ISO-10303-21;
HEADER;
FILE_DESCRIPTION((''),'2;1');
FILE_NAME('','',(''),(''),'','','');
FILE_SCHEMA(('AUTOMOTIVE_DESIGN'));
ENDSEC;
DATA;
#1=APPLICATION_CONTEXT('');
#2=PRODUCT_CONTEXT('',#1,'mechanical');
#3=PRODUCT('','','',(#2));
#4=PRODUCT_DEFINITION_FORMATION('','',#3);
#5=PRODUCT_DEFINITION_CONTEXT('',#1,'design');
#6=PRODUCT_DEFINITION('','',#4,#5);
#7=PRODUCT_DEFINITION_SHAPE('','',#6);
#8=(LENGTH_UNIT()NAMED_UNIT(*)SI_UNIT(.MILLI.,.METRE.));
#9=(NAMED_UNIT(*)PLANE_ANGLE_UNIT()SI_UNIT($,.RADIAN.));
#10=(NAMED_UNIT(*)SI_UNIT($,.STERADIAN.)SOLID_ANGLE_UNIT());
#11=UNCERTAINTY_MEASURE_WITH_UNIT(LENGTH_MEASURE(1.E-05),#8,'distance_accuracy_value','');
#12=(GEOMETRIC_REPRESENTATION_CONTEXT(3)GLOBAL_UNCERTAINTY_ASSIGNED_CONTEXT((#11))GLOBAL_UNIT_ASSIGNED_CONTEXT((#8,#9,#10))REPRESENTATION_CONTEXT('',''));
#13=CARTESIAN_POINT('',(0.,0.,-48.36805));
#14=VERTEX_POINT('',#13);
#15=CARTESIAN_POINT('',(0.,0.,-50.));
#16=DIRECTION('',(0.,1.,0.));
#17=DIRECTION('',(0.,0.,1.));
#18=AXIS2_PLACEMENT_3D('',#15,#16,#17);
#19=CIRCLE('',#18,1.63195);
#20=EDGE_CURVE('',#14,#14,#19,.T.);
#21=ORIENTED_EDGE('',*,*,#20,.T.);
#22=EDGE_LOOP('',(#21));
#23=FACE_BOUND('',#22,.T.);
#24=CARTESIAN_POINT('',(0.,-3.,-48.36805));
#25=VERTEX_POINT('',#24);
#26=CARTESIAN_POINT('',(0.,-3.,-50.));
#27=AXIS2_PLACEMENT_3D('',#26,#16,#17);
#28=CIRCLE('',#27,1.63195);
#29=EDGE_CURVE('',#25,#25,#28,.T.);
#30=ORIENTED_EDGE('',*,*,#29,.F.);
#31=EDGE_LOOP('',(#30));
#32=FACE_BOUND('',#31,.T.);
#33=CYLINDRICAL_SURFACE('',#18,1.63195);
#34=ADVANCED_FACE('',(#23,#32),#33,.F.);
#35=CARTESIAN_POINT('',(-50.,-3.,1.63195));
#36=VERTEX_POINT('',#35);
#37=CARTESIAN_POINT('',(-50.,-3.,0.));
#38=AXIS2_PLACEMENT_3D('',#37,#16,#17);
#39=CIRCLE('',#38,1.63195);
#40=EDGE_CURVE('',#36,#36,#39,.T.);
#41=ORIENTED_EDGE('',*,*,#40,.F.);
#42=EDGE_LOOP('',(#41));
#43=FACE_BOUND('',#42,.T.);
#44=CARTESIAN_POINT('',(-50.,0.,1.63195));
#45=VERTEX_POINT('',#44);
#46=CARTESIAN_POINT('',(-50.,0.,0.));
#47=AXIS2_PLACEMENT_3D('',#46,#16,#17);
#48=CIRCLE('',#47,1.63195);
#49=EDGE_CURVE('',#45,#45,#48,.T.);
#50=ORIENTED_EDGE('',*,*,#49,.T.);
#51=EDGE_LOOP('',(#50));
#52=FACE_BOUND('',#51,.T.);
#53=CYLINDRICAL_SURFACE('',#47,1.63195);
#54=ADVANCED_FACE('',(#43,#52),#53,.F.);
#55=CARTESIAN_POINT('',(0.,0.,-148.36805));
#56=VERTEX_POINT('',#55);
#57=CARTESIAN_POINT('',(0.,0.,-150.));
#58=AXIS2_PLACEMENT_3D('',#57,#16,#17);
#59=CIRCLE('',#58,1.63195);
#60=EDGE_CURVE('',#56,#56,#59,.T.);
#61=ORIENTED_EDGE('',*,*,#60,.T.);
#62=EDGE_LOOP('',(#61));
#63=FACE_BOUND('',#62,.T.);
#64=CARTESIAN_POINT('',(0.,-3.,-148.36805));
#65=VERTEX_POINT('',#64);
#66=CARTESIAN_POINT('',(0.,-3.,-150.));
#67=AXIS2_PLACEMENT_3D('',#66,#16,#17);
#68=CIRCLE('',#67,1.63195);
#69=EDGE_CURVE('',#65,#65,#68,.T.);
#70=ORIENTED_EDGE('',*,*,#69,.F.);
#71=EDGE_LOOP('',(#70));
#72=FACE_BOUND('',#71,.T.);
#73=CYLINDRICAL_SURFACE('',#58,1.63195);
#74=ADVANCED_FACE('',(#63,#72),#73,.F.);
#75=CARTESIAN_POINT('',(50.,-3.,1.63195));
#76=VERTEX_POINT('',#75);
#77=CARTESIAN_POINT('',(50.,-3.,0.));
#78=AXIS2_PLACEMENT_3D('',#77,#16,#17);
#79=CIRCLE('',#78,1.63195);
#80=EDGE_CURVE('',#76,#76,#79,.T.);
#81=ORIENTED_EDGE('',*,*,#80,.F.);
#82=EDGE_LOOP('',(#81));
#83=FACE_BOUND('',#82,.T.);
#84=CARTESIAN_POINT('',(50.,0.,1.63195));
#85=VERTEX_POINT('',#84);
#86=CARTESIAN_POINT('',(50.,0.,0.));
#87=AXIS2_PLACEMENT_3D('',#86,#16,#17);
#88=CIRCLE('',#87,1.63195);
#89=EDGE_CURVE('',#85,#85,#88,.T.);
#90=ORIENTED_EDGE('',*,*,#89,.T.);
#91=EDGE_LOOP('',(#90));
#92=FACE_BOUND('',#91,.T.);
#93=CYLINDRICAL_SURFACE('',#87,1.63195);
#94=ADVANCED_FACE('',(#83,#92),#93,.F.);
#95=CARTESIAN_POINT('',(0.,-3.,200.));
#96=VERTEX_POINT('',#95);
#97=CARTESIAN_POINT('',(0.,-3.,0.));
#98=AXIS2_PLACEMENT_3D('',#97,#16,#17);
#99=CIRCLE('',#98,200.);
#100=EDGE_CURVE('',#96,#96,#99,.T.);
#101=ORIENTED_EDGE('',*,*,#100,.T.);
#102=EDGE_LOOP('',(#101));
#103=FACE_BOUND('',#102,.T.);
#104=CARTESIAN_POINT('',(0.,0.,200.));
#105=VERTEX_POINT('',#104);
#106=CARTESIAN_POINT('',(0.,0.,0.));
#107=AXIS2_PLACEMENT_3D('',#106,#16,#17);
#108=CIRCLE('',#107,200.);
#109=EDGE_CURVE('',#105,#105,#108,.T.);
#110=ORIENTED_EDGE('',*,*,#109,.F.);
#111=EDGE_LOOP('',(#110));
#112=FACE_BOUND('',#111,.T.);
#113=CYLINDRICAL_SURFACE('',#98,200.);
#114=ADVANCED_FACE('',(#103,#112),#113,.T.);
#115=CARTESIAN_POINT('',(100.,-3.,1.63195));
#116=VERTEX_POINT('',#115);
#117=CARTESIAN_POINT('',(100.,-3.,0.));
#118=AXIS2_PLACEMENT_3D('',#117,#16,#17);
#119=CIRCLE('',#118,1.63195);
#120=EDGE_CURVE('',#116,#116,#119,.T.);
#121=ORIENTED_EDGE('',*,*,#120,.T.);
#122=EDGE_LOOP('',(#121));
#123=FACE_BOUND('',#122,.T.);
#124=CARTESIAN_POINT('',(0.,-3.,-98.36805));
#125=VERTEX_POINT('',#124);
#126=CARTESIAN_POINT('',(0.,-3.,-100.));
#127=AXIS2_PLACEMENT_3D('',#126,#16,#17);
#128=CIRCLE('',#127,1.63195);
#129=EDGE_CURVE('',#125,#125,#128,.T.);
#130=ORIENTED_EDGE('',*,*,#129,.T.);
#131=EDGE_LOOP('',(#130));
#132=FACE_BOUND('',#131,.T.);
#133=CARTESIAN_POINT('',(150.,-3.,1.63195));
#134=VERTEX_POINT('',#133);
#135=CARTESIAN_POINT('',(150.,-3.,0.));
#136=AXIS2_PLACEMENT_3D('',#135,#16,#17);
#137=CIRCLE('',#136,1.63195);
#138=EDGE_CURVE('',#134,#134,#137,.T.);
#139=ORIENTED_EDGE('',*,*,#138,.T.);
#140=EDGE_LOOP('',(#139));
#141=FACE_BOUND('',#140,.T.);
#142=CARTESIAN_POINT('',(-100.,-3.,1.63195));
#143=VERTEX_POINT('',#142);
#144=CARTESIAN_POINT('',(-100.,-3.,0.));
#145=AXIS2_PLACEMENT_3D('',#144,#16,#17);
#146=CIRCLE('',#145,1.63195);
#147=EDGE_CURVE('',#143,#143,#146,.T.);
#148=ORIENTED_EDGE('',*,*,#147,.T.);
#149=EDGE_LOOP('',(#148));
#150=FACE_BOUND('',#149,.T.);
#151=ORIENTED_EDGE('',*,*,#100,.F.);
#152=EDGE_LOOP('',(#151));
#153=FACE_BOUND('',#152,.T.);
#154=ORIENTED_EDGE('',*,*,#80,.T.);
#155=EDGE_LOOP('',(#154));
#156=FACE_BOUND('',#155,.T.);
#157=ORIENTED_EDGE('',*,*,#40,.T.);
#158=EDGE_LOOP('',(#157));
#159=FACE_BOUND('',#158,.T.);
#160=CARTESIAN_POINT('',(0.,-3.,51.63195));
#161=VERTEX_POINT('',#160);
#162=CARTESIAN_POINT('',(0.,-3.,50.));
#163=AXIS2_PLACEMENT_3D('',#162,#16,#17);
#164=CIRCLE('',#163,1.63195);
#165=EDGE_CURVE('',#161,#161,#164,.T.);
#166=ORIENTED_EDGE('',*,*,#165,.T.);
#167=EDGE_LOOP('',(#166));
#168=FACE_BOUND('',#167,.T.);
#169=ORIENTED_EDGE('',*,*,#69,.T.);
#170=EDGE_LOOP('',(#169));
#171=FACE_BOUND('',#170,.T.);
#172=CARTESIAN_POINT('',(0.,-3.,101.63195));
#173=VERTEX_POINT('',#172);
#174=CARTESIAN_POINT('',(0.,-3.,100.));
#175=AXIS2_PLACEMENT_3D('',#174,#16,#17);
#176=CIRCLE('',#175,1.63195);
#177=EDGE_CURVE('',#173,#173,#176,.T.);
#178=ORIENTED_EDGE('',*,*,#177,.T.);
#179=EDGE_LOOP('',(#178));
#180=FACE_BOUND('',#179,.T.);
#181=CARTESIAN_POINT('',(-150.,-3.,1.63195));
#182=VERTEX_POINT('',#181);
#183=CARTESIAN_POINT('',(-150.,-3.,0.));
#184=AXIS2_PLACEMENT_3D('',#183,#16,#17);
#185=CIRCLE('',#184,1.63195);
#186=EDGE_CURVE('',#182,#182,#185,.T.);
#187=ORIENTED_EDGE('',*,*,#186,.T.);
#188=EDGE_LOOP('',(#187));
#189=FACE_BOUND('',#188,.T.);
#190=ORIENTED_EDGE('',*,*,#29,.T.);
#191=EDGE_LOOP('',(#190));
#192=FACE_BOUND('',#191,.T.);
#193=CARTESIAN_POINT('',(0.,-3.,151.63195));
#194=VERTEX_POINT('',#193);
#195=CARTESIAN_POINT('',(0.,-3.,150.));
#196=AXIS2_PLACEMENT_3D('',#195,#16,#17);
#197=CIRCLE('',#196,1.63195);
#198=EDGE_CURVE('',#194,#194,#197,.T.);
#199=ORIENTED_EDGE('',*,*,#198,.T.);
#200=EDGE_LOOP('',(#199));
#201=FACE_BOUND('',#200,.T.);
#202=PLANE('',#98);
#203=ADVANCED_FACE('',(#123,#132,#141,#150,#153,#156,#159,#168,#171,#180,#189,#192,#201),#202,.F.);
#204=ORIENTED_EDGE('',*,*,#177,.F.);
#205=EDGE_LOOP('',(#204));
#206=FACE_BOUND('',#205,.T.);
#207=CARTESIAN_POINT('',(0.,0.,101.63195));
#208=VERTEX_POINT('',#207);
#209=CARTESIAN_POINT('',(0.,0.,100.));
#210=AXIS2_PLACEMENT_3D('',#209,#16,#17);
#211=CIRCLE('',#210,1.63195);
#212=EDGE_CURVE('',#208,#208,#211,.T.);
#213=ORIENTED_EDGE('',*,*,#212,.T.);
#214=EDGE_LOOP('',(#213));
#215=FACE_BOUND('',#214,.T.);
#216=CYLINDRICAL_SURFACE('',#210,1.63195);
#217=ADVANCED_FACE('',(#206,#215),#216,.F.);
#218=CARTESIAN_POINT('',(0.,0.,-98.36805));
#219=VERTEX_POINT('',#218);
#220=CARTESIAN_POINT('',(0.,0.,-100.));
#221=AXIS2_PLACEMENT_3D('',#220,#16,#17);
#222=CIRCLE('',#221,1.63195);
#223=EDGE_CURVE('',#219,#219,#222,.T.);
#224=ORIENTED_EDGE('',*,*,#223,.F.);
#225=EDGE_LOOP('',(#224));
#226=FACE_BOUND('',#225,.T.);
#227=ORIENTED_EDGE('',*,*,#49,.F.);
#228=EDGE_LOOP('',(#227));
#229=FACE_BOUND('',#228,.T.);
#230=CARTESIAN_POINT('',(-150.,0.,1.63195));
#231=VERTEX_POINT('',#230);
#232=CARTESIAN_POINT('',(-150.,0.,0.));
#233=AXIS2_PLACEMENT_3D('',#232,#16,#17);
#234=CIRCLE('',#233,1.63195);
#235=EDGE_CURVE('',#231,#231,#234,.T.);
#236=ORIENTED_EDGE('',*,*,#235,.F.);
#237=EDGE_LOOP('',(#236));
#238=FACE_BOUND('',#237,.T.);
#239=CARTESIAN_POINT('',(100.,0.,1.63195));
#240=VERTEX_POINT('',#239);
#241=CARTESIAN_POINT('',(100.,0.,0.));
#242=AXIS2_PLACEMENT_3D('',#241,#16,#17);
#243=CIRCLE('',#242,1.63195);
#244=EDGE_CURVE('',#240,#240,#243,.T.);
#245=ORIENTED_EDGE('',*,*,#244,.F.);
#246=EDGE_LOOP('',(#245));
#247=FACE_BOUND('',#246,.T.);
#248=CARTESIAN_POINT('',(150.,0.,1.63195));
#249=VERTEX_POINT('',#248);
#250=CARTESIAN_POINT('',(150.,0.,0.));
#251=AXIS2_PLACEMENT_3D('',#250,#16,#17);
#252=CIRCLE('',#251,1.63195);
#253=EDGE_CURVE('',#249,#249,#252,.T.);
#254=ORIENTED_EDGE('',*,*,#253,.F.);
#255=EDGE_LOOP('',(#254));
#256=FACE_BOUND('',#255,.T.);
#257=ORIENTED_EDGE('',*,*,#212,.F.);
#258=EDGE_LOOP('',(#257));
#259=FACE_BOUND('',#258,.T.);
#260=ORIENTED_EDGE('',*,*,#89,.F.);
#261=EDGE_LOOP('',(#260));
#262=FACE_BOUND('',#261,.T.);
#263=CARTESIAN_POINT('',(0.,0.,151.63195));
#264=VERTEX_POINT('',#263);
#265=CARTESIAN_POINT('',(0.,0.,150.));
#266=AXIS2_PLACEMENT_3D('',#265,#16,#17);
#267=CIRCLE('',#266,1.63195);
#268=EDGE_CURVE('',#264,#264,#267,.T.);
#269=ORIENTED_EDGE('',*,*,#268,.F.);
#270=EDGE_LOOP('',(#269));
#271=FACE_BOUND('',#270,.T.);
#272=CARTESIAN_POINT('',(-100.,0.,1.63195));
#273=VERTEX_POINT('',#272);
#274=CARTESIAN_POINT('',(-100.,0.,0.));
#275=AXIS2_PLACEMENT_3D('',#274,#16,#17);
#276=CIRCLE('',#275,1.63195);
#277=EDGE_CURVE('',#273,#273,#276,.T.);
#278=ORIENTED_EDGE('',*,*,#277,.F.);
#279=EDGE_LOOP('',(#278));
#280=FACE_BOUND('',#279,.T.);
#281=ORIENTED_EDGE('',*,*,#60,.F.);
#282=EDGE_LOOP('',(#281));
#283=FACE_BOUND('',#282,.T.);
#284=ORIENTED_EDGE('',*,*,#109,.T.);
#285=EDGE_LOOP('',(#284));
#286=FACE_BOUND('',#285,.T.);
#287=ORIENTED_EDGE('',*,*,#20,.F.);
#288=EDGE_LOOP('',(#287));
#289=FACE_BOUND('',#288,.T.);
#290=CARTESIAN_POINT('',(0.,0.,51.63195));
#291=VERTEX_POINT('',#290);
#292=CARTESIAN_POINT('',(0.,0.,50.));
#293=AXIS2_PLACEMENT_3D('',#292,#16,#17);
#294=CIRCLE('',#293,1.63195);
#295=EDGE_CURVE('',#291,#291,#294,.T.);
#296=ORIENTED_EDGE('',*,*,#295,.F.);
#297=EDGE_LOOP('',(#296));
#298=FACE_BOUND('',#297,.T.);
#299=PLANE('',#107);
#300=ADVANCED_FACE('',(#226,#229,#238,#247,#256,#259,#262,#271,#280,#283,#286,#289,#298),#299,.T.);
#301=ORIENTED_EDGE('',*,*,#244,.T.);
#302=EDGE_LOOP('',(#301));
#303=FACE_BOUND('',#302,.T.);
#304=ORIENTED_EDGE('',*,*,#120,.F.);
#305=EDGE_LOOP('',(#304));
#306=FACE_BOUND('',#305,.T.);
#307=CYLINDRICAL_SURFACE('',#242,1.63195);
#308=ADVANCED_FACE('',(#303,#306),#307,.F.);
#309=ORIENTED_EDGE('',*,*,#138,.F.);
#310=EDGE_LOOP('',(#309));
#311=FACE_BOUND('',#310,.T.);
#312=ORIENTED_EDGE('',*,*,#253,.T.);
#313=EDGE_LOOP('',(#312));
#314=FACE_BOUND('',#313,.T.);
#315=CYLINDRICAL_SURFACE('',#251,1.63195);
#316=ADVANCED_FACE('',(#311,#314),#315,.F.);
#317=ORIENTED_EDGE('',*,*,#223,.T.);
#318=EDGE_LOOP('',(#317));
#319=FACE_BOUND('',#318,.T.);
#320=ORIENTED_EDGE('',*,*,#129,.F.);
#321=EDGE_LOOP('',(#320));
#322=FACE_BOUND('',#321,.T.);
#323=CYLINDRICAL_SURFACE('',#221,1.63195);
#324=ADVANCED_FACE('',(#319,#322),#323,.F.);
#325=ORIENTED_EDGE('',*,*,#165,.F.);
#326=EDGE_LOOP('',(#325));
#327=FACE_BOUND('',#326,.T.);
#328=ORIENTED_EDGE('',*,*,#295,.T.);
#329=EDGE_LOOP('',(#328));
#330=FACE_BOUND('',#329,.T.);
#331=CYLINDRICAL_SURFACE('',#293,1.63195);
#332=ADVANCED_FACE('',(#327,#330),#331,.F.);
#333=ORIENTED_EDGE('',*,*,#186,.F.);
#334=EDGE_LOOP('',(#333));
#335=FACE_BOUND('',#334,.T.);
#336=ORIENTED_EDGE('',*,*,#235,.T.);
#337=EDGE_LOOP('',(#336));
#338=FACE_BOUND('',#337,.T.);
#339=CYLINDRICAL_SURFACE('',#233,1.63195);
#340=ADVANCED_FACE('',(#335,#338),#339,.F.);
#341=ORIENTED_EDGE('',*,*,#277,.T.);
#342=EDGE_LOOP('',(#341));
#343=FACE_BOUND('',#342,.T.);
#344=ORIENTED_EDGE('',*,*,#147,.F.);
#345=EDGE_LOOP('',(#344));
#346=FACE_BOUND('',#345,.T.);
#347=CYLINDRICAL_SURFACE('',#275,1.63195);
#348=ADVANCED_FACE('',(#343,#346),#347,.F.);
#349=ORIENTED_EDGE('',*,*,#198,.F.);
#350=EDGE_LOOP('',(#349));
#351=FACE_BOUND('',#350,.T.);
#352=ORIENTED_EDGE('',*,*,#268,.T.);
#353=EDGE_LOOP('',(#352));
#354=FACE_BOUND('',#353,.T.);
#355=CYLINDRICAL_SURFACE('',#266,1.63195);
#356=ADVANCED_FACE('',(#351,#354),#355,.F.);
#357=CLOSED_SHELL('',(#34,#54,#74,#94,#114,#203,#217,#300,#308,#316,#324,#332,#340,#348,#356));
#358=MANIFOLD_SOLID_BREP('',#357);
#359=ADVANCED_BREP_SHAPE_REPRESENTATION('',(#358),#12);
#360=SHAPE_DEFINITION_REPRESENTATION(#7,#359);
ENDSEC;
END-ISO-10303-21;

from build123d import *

# Parameters (mm, degrees)
SKETCH3_R                    = 200
BASE_FLANGE1_DEPTH           = 3
F_30_0_1285_DIAMETER_HOLE1_D = 3.2639


# Sheet-metal steps are written as plain solids
with BuildPart() as part:
    # Sketch3 → Base-Flange1 (new body)
    with BuildSketch(Plane(origin=(0, 0, 0), x_dir=(1, 0, 0), z_dir=(0, 1, 0))):
        with Locations(Location((0, 0, 0), (0, 0, 270))):
            Circle(SKETCH3_R)
    extrude(amount=-BASE_FLANGE1_DEPTH)

    # #30 (0.1285) Diameter Hole1 (through all)
    with Locations(Plane(origin=(0, 0, 0), x_dir=(1, 0, 0), z_dir=(0, 1, 0))):
        with Locations((0, 150), (0, 100), (0, 50), (50, 0), (100, 0), (150, 0), (0, -50), (0, -100), (0, -150), (-50, 0), (-100, 0), (-150, 0)):
            Hole(F_30_0_1285_DIAMETER_HOLE1_D / 2)


solid = part.part
